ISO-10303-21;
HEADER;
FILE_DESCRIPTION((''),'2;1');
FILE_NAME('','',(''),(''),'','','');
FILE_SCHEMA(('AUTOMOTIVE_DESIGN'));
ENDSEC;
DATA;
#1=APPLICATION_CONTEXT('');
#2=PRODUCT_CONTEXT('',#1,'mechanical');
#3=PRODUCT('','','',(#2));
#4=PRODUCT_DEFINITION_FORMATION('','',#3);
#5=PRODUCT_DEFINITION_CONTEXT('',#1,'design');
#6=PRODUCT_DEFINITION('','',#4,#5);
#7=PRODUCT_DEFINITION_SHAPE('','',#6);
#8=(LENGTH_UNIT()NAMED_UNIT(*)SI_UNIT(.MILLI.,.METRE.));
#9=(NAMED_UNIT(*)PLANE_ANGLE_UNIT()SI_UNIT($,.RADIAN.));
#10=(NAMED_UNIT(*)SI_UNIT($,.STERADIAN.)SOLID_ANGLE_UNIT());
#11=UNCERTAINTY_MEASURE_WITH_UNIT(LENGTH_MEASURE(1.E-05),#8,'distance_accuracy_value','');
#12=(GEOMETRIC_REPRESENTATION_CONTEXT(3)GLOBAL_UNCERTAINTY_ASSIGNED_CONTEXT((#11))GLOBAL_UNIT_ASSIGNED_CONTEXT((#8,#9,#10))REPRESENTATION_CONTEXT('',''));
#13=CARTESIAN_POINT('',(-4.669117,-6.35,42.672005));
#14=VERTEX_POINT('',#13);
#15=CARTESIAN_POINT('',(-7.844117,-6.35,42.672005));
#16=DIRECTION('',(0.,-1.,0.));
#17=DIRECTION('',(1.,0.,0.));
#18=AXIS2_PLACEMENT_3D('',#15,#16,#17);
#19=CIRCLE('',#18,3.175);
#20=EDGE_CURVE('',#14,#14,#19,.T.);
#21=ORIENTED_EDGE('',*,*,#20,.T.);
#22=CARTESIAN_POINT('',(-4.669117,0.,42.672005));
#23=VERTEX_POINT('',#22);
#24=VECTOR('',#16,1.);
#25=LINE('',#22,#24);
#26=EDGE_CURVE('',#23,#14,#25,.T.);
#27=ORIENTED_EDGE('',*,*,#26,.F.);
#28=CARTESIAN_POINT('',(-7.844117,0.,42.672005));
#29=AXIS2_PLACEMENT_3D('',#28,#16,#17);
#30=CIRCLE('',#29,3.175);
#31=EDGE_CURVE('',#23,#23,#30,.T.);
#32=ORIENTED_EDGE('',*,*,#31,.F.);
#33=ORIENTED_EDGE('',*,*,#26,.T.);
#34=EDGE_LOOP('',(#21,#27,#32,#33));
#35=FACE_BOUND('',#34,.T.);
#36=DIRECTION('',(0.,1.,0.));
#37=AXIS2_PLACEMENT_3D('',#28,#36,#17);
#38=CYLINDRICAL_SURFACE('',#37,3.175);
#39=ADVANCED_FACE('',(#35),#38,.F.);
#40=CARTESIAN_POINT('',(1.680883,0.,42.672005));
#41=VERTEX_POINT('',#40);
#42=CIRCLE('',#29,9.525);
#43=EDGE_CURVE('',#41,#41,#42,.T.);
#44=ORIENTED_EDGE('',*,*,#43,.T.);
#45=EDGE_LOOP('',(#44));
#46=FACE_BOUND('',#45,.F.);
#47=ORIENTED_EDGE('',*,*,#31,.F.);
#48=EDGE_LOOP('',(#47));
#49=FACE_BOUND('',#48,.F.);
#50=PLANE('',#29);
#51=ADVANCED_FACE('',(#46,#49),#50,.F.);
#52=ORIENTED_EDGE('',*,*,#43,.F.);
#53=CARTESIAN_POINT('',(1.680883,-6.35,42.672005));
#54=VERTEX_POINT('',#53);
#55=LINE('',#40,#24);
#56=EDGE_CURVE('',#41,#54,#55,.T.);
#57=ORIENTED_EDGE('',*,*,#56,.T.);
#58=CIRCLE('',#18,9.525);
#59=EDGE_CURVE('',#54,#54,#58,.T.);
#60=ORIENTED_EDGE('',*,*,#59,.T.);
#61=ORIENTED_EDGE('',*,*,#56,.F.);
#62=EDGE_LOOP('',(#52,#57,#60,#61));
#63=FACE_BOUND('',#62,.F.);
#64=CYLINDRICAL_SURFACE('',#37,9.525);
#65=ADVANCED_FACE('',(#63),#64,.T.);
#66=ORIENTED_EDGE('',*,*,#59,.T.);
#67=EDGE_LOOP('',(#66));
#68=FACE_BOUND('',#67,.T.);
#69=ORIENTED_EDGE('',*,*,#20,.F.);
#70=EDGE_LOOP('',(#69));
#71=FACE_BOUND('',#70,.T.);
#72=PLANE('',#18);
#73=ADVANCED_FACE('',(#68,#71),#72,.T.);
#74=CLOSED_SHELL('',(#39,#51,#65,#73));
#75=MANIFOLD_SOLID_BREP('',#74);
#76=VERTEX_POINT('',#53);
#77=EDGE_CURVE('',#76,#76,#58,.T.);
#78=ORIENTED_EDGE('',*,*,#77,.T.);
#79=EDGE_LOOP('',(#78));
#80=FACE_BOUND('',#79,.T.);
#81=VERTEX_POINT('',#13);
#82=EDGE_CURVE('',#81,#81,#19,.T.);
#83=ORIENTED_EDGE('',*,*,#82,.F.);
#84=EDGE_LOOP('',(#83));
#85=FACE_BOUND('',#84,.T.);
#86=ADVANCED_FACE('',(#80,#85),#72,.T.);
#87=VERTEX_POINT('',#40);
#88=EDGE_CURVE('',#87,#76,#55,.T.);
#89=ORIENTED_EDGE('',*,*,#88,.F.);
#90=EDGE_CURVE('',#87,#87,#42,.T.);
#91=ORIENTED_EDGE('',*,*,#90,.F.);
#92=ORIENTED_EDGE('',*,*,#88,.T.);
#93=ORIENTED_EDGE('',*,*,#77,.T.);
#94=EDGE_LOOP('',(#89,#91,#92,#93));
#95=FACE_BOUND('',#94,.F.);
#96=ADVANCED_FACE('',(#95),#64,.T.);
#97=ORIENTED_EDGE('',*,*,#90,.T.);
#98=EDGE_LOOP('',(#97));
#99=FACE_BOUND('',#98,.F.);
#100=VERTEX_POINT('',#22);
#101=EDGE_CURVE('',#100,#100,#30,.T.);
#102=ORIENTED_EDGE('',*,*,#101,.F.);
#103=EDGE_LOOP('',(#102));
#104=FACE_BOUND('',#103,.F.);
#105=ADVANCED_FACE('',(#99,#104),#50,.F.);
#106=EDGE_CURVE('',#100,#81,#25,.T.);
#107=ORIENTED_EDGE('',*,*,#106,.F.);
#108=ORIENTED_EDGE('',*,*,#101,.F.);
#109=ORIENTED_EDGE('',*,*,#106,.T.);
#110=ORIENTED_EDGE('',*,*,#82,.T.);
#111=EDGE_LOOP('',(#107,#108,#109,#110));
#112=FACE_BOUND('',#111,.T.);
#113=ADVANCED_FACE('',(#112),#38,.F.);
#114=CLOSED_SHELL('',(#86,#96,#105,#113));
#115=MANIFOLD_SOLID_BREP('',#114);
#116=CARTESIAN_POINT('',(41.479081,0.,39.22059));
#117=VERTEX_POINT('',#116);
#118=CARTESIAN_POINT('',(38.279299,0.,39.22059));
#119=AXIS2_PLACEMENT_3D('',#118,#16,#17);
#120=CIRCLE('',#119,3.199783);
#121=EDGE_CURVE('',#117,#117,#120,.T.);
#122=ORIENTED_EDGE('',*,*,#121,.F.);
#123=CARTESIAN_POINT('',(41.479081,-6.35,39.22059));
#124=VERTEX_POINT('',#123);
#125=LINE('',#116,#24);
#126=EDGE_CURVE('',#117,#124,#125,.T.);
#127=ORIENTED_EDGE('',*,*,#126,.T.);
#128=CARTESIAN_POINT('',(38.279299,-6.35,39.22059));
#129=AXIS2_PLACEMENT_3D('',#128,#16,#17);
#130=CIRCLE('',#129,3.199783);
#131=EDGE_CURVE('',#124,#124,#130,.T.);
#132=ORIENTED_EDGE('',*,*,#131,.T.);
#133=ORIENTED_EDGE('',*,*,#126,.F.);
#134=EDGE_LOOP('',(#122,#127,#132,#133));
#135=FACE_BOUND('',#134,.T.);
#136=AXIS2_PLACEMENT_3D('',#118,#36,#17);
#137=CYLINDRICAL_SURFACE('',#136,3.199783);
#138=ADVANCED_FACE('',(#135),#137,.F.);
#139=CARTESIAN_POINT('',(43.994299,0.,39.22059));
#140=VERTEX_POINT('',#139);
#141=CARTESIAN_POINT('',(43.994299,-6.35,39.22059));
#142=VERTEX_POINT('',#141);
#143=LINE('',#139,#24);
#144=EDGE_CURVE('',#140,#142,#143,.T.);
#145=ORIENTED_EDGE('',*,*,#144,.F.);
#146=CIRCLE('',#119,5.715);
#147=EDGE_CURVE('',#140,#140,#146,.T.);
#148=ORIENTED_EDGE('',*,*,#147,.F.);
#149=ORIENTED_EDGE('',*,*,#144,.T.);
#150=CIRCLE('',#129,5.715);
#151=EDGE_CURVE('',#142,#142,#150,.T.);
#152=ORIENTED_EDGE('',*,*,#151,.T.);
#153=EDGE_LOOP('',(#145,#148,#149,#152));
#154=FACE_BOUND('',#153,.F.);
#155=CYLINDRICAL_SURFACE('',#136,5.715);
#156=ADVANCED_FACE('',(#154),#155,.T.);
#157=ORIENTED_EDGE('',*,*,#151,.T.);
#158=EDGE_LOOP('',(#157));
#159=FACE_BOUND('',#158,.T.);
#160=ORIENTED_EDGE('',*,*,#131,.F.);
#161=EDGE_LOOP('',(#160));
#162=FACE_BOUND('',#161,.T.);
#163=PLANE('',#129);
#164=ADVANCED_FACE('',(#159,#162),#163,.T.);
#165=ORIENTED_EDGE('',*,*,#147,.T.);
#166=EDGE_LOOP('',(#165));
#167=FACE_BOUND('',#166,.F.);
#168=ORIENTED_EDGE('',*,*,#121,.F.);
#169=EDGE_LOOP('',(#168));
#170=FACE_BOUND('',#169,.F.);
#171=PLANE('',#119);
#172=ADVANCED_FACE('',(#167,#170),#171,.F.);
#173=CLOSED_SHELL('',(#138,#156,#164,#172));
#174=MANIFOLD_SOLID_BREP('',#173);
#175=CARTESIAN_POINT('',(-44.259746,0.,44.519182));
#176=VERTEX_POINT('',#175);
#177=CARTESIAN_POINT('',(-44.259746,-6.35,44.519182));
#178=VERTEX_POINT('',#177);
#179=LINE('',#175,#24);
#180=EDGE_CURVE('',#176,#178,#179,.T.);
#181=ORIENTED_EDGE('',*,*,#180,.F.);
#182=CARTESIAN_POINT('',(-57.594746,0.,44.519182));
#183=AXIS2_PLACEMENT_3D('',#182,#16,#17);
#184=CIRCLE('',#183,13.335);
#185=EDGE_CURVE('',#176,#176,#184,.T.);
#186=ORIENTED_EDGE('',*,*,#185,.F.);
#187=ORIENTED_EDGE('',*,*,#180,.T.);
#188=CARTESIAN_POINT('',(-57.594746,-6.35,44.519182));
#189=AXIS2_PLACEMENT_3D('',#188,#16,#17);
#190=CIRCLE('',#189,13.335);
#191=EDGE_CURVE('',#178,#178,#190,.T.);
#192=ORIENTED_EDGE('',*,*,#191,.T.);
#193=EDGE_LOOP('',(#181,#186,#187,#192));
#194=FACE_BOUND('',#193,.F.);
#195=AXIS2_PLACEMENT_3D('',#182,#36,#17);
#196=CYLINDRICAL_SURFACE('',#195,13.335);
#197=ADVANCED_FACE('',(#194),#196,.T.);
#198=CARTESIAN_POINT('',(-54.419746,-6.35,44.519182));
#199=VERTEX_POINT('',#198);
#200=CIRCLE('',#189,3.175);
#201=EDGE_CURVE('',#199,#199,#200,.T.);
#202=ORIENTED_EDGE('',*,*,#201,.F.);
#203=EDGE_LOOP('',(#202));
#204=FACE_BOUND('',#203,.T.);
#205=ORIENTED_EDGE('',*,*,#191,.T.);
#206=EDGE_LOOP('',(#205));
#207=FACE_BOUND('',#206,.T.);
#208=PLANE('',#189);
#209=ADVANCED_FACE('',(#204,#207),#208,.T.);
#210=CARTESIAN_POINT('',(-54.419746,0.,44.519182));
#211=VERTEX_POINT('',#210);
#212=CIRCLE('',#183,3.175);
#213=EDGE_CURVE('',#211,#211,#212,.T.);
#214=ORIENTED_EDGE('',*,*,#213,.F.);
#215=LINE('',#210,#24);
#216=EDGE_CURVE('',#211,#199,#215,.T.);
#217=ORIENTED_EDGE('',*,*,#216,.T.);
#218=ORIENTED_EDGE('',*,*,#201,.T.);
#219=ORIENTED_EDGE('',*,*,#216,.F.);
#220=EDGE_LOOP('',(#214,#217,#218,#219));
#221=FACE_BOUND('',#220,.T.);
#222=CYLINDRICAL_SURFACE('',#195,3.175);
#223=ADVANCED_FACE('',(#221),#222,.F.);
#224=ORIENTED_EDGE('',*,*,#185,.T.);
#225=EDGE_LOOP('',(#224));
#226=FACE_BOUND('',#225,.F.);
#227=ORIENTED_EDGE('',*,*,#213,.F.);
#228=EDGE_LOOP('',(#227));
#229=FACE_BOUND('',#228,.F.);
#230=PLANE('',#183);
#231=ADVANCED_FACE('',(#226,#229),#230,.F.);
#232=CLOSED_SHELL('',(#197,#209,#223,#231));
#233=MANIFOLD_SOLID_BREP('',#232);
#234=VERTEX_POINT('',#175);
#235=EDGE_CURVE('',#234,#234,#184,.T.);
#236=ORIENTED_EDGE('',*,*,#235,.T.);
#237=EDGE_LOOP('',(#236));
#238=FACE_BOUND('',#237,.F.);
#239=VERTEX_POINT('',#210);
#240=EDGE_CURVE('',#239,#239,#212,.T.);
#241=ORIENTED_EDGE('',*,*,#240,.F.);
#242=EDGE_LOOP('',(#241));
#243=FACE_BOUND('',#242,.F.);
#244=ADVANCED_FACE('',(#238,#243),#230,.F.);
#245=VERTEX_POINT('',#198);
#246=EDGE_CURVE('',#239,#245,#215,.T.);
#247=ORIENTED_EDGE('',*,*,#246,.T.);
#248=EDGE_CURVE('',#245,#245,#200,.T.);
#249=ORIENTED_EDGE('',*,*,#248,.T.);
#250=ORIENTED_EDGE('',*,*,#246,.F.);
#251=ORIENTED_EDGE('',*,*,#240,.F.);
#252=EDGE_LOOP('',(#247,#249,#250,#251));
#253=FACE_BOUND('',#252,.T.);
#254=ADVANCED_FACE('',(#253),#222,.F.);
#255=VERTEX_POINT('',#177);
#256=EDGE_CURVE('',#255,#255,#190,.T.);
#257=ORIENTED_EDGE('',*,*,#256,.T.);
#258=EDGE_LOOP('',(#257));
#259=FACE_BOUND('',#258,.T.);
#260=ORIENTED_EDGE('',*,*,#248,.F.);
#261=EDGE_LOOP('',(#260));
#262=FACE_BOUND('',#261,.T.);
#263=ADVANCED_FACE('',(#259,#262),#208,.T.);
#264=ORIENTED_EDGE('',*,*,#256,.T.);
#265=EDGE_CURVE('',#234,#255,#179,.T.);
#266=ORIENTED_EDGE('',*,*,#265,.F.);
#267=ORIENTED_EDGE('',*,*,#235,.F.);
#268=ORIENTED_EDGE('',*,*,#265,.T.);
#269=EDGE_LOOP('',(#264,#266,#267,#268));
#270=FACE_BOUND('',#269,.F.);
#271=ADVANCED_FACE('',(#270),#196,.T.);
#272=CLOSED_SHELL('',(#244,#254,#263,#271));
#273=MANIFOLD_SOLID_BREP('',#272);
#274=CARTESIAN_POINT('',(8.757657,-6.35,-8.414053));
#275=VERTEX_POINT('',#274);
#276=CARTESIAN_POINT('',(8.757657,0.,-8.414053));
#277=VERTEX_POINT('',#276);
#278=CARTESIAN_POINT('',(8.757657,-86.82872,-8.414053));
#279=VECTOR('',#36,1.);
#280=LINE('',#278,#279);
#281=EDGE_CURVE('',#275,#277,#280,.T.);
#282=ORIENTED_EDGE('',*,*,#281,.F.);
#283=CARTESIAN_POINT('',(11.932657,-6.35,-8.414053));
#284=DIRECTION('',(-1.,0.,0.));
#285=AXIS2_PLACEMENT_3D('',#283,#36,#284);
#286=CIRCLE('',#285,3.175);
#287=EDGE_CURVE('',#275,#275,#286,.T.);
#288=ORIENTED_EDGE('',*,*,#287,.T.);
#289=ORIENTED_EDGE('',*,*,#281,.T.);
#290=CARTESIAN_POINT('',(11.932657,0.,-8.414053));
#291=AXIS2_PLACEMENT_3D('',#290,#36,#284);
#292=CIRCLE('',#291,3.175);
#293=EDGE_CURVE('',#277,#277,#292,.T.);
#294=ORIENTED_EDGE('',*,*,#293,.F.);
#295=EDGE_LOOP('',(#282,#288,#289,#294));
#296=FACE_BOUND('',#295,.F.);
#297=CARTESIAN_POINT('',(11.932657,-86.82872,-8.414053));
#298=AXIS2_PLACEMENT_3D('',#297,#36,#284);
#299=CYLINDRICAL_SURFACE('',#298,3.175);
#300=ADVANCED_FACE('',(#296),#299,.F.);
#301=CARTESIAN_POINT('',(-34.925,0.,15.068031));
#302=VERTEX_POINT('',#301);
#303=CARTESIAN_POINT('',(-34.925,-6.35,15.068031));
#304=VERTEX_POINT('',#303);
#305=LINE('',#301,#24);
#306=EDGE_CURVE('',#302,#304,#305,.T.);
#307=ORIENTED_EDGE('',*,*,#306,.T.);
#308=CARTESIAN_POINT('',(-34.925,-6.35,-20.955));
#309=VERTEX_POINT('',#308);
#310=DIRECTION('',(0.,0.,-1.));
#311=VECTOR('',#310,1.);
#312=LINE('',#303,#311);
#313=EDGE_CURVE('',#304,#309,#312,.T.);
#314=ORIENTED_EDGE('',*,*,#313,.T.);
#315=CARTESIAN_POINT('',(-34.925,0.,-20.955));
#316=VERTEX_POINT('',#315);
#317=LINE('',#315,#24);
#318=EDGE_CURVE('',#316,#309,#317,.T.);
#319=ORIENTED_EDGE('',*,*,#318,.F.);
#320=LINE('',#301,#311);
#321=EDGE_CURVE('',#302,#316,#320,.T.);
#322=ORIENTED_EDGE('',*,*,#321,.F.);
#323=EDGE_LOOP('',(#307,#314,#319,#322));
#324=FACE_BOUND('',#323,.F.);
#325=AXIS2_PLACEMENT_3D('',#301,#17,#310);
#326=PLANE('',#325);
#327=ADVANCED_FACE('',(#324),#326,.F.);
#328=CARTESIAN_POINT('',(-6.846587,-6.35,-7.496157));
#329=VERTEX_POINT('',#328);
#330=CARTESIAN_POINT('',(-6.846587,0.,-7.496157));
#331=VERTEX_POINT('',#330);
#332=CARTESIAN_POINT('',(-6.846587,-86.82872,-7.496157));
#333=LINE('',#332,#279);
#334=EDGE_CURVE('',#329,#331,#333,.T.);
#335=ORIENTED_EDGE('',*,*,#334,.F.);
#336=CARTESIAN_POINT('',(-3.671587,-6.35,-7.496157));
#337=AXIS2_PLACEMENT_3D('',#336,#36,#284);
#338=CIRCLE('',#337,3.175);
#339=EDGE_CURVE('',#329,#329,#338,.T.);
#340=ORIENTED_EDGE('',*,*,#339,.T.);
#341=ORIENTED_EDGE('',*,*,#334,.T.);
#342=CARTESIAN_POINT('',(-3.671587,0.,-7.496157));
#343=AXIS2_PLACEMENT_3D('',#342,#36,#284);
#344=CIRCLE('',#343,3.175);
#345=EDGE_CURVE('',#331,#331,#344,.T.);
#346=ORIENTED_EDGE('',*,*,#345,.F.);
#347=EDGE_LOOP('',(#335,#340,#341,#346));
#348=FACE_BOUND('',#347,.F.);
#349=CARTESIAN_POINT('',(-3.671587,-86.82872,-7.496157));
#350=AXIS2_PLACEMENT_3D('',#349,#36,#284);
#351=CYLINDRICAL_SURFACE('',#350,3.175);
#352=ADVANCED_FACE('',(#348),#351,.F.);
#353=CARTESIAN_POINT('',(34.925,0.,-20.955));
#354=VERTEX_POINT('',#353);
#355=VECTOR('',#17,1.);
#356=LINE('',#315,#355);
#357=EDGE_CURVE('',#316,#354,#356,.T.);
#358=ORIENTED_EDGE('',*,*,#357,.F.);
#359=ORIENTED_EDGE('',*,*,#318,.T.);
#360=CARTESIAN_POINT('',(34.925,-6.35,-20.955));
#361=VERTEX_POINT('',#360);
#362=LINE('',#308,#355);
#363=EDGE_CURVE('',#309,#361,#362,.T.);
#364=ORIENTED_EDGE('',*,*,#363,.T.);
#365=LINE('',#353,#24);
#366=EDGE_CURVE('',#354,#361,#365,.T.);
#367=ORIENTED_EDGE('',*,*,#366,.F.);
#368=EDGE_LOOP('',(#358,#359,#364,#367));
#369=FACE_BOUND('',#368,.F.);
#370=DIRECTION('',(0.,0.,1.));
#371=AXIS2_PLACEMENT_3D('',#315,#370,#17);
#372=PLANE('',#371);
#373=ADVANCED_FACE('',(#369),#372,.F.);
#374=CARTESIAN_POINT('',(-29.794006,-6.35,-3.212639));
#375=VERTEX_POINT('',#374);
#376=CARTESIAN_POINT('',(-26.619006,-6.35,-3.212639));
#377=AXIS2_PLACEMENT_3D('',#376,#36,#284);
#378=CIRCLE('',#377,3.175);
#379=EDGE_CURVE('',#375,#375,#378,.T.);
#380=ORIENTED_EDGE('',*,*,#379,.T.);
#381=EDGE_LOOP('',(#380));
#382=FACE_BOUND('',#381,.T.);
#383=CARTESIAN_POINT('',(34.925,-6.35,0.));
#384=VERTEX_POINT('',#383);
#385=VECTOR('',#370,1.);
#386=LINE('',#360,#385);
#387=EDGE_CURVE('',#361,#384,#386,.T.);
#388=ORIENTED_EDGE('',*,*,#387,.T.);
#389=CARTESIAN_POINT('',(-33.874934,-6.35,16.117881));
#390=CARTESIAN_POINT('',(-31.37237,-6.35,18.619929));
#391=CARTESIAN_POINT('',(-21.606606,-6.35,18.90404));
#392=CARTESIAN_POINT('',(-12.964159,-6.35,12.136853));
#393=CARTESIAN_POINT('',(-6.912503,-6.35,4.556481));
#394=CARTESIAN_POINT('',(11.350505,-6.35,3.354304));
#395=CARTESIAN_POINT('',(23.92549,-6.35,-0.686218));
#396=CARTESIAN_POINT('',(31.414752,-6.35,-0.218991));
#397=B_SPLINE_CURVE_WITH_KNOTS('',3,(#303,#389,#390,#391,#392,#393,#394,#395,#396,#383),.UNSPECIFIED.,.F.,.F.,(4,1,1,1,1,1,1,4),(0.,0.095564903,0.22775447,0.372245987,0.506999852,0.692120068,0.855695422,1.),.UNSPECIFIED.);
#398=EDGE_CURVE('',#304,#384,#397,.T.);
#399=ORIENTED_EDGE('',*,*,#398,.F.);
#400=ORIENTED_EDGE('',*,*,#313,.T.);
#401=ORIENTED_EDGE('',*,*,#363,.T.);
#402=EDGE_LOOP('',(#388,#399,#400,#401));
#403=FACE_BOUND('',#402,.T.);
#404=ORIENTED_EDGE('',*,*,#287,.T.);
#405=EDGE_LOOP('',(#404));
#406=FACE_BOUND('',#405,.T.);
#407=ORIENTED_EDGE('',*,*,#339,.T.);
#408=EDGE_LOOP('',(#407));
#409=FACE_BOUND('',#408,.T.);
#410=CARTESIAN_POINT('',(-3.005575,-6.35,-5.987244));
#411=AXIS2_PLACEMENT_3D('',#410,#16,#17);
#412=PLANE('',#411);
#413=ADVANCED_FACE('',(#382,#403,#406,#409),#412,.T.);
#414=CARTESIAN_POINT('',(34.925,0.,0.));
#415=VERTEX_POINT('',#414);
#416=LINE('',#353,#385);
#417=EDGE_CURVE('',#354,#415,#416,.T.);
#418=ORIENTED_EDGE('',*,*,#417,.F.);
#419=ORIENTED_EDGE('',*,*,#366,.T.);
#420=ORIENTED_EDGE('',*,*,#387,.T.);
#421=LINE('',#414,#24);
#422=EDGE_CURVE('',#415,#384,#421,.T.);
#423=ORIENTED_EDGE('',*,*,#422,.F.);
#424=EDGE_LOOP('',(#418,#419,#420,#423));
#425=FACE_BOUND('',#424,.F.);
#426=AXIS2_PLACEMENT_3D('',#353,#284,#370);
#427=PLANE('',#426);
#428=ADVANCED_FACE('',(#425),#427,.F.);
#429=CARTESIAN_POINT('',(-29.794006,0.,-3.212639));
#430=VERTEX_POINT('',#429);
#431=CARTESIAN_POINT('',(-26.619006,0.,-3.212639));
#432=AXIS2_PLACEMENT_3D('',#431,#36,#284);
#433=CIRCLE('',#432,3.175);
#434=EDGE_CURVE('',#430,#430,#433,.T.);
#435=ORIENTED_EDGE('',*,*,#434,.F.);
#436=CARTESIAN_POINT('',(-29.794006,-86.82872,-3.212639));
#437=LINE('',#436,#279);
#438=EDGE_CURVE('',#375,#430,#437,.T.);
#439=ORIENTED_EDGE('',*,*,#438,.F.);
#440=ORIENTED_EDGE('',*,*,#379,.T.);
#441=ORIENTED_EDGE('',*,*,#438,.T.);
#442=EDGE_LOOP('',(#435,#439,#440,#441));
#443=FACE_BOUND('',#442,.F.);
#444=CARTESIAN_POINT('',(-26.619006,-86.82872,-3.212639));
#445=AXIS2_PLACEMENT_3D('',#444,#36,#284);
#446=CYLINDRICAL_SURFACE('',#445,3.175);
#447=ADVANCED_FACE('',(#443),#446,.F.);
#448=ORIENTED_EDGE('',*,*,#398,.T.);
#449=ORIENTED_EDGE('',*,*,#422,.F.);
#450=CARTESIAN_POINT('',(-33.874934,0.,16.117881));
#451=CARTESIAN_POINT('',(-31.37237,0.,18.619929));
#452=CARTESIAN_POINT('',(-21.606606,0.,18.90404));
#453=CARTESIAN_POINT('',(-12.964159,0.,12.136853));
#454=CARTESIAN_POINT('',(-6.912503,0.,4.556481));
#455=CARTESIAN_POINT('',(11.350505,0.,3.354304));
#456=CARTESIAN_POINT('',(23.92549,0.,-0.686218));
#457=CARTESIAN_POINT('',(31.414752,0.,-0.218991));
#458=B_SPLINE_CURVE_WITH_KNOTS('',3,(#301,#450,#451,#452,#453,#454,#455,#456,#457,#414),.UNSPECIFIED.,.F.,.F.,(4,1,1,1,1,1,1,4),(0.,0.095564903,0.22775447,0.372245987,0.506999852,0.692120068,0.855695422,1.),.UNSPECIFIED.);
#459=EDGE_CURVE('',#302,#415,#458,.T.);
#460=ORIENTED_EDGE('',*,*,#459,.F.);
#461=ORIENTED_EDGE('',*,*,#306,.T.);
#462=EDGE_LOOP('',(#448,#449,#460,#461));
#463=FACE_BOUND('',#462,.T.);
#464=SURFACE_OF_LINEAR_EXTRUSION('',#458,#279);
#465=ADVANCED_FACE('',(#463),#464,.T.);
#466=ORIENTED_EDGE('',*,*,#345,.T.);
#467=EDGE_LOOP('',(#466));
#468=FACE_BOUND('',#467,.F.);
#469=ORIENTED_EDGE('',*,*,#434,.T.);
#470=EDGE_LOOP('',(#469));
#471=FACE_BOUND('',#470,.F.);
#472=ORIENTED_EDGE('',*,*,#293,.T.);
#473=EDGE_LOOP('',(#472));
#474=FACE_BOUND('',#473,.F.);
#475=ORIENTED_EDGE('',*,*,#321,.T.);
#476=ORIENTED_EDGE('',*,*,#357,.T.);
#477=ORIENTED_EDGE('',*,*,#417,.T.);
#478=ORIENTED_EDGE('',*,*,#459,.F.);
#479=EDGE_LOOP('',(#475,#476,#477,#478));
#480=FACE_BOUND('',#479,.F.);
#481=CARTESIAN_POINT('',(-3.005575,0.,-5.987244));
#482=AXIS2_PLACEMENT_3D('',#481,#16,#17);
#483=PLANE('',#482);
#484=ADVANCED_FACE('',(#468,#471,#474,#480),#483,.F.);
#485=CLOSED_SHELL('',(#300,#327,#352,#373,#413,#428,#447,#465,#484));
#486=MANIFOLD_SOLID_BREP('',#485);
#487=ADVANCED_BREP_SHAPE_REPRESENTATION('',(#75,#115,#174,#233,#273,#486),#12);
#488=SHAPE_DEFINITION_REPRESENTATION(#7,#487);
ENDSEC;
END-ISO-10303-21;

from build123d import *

# Parameters (mm, degrees)
F1_DEPTH = 6.35
F2_R     = 13.335
F2_R_2   = 3.175
F3_DEPTH = 6.35
F2_R_3   = 9.525
F4_DEPTH = 6.35
F2_R_4   = 5.715
F2_R_5   = 3.199782715
F7_D     = 6.35
F9_D     = 6.35
F11_D    = 6.35


with BuildPart() as f1:
    # F0 (on Front) → F1 (new body)
    with BuildSketch(Plane.XZ):
        with BuildLine():
            Line((-34.925, -20.955), (34.925, -20.955))
            Line((34.925, -20.955), (34.925, 0))
            add(Edge.make_bspline(
                [(-34.925, 15.0680310093), (-33.8749337765, 16.1178807955), (-31.3723698821, 18.6199288672), (-21.6066058687, 18.904040471), (-12.9641594898, 12.1368529586), (-6.9125027094, 4.5564810056), (11.3505046476, 3.3543035541), (23.9254899985, -0.6862175421), (31.4147522763, -0.2189909882), (34.925, 0)],
                knots=[0, 0, 0, 0, 0.095564903, 0.2277544697, 0.3722459873, 0.5069998522, 0.6921200679, 0.8556954222, 1, 1, 1, 1], degree=3))
            Line((-34.925, 15.0680310093), (-34.925, -20.955))
        make_face()
    extrude(amount=F1_DEPTH)

    # F7 (through all)
    with Locations(Plane.XZ.offset(6.35)):
        with Locations((-3.671587212, -7.4961567298)):
            Hole(F7_D / 2)

    # F9 (through all)
    with Locations(Plane.XZ.offset(6.35)):
        with Locations((-26.6190059483, -3.212638665)):
            Hole(F9_D / 2)

    # F11 (through all)
    with Locations(Plane.XZ.offset(6.35)):
        with Locations((11.9326571003, -8.4140533581)):
            Hole(F11_D / 2)


with BuildPart() as f3:
    # F2 (on Front) → F3 (new body)
    with BuildSketch(Plane.XZ):
        with Locations((-57.5947463512, 44.5191822946)):
            Circle(F2_R)
        with Locations((-57.5947463512, 44.5191822946)):
            Circle(F2_R_2, mode=Mode.SUBTRACT)
    extrude(amount=F3_DEPTH)


with BuildPart() as f3b:
    # F2 (on Front) → F3, piece 2 (new body)
    with BuildSketch(Plane.XZ):
        with Locations((-7.8441174701, 42.6720045507)):
            Circle(F2_R_3)
        with Locations((-7.8441174701, 42.6720045507)):
            Circle(F2_R_2, mode=Mode.SUBTRACT)
    extrude(amount=F3_DEPTH)


with BuildPart() as f4:
    # F2 (on Front) → F4 (new body)
    with BuildSketch(Plane.XZ):
        with Locations((-57.5947463512, 44.5191822946)):
            Circle(F2_R)
        with Locations((-57.5947463512, 44.5191822946)):
            Circle(F2_R_2, mode=Mode.SUBTRACT)
    extrude(amount=F4_DEPTH)


with BuildPart() as f4b:
    # F2 (on Front) → F4, piece 2 (new body)
    with BuildSketch(Plane.XZ):
        with Locations((-7.8441174701, 42.6720045507)):
            Circle(F2_R_3)
        with Locations((-7.8441174701, 42.6720045507)):
            Circle(F2_R_2, mode=Mode.SUBTRACT)
    extrude(amount=F4_DEPTH)


with BuildPart() as f4c:
    # F2 (on Front) → F4, piece 3 (new body)
    with BuildSketch(Plane.XZ):
        with Locations((38.2792986929, 39.2205901444)):
            Circle(F2_R_4)
        with Locations((38.2792986929, 39.2205901444)):
            Circle(F2_R_5, mode=Mode.SUBTRACT)
    extrude(amount=F4_DEPTH)


solid = Compound([f1.part, f3.part, f3b.part, f4.part, f4b.part, f4c.part])
